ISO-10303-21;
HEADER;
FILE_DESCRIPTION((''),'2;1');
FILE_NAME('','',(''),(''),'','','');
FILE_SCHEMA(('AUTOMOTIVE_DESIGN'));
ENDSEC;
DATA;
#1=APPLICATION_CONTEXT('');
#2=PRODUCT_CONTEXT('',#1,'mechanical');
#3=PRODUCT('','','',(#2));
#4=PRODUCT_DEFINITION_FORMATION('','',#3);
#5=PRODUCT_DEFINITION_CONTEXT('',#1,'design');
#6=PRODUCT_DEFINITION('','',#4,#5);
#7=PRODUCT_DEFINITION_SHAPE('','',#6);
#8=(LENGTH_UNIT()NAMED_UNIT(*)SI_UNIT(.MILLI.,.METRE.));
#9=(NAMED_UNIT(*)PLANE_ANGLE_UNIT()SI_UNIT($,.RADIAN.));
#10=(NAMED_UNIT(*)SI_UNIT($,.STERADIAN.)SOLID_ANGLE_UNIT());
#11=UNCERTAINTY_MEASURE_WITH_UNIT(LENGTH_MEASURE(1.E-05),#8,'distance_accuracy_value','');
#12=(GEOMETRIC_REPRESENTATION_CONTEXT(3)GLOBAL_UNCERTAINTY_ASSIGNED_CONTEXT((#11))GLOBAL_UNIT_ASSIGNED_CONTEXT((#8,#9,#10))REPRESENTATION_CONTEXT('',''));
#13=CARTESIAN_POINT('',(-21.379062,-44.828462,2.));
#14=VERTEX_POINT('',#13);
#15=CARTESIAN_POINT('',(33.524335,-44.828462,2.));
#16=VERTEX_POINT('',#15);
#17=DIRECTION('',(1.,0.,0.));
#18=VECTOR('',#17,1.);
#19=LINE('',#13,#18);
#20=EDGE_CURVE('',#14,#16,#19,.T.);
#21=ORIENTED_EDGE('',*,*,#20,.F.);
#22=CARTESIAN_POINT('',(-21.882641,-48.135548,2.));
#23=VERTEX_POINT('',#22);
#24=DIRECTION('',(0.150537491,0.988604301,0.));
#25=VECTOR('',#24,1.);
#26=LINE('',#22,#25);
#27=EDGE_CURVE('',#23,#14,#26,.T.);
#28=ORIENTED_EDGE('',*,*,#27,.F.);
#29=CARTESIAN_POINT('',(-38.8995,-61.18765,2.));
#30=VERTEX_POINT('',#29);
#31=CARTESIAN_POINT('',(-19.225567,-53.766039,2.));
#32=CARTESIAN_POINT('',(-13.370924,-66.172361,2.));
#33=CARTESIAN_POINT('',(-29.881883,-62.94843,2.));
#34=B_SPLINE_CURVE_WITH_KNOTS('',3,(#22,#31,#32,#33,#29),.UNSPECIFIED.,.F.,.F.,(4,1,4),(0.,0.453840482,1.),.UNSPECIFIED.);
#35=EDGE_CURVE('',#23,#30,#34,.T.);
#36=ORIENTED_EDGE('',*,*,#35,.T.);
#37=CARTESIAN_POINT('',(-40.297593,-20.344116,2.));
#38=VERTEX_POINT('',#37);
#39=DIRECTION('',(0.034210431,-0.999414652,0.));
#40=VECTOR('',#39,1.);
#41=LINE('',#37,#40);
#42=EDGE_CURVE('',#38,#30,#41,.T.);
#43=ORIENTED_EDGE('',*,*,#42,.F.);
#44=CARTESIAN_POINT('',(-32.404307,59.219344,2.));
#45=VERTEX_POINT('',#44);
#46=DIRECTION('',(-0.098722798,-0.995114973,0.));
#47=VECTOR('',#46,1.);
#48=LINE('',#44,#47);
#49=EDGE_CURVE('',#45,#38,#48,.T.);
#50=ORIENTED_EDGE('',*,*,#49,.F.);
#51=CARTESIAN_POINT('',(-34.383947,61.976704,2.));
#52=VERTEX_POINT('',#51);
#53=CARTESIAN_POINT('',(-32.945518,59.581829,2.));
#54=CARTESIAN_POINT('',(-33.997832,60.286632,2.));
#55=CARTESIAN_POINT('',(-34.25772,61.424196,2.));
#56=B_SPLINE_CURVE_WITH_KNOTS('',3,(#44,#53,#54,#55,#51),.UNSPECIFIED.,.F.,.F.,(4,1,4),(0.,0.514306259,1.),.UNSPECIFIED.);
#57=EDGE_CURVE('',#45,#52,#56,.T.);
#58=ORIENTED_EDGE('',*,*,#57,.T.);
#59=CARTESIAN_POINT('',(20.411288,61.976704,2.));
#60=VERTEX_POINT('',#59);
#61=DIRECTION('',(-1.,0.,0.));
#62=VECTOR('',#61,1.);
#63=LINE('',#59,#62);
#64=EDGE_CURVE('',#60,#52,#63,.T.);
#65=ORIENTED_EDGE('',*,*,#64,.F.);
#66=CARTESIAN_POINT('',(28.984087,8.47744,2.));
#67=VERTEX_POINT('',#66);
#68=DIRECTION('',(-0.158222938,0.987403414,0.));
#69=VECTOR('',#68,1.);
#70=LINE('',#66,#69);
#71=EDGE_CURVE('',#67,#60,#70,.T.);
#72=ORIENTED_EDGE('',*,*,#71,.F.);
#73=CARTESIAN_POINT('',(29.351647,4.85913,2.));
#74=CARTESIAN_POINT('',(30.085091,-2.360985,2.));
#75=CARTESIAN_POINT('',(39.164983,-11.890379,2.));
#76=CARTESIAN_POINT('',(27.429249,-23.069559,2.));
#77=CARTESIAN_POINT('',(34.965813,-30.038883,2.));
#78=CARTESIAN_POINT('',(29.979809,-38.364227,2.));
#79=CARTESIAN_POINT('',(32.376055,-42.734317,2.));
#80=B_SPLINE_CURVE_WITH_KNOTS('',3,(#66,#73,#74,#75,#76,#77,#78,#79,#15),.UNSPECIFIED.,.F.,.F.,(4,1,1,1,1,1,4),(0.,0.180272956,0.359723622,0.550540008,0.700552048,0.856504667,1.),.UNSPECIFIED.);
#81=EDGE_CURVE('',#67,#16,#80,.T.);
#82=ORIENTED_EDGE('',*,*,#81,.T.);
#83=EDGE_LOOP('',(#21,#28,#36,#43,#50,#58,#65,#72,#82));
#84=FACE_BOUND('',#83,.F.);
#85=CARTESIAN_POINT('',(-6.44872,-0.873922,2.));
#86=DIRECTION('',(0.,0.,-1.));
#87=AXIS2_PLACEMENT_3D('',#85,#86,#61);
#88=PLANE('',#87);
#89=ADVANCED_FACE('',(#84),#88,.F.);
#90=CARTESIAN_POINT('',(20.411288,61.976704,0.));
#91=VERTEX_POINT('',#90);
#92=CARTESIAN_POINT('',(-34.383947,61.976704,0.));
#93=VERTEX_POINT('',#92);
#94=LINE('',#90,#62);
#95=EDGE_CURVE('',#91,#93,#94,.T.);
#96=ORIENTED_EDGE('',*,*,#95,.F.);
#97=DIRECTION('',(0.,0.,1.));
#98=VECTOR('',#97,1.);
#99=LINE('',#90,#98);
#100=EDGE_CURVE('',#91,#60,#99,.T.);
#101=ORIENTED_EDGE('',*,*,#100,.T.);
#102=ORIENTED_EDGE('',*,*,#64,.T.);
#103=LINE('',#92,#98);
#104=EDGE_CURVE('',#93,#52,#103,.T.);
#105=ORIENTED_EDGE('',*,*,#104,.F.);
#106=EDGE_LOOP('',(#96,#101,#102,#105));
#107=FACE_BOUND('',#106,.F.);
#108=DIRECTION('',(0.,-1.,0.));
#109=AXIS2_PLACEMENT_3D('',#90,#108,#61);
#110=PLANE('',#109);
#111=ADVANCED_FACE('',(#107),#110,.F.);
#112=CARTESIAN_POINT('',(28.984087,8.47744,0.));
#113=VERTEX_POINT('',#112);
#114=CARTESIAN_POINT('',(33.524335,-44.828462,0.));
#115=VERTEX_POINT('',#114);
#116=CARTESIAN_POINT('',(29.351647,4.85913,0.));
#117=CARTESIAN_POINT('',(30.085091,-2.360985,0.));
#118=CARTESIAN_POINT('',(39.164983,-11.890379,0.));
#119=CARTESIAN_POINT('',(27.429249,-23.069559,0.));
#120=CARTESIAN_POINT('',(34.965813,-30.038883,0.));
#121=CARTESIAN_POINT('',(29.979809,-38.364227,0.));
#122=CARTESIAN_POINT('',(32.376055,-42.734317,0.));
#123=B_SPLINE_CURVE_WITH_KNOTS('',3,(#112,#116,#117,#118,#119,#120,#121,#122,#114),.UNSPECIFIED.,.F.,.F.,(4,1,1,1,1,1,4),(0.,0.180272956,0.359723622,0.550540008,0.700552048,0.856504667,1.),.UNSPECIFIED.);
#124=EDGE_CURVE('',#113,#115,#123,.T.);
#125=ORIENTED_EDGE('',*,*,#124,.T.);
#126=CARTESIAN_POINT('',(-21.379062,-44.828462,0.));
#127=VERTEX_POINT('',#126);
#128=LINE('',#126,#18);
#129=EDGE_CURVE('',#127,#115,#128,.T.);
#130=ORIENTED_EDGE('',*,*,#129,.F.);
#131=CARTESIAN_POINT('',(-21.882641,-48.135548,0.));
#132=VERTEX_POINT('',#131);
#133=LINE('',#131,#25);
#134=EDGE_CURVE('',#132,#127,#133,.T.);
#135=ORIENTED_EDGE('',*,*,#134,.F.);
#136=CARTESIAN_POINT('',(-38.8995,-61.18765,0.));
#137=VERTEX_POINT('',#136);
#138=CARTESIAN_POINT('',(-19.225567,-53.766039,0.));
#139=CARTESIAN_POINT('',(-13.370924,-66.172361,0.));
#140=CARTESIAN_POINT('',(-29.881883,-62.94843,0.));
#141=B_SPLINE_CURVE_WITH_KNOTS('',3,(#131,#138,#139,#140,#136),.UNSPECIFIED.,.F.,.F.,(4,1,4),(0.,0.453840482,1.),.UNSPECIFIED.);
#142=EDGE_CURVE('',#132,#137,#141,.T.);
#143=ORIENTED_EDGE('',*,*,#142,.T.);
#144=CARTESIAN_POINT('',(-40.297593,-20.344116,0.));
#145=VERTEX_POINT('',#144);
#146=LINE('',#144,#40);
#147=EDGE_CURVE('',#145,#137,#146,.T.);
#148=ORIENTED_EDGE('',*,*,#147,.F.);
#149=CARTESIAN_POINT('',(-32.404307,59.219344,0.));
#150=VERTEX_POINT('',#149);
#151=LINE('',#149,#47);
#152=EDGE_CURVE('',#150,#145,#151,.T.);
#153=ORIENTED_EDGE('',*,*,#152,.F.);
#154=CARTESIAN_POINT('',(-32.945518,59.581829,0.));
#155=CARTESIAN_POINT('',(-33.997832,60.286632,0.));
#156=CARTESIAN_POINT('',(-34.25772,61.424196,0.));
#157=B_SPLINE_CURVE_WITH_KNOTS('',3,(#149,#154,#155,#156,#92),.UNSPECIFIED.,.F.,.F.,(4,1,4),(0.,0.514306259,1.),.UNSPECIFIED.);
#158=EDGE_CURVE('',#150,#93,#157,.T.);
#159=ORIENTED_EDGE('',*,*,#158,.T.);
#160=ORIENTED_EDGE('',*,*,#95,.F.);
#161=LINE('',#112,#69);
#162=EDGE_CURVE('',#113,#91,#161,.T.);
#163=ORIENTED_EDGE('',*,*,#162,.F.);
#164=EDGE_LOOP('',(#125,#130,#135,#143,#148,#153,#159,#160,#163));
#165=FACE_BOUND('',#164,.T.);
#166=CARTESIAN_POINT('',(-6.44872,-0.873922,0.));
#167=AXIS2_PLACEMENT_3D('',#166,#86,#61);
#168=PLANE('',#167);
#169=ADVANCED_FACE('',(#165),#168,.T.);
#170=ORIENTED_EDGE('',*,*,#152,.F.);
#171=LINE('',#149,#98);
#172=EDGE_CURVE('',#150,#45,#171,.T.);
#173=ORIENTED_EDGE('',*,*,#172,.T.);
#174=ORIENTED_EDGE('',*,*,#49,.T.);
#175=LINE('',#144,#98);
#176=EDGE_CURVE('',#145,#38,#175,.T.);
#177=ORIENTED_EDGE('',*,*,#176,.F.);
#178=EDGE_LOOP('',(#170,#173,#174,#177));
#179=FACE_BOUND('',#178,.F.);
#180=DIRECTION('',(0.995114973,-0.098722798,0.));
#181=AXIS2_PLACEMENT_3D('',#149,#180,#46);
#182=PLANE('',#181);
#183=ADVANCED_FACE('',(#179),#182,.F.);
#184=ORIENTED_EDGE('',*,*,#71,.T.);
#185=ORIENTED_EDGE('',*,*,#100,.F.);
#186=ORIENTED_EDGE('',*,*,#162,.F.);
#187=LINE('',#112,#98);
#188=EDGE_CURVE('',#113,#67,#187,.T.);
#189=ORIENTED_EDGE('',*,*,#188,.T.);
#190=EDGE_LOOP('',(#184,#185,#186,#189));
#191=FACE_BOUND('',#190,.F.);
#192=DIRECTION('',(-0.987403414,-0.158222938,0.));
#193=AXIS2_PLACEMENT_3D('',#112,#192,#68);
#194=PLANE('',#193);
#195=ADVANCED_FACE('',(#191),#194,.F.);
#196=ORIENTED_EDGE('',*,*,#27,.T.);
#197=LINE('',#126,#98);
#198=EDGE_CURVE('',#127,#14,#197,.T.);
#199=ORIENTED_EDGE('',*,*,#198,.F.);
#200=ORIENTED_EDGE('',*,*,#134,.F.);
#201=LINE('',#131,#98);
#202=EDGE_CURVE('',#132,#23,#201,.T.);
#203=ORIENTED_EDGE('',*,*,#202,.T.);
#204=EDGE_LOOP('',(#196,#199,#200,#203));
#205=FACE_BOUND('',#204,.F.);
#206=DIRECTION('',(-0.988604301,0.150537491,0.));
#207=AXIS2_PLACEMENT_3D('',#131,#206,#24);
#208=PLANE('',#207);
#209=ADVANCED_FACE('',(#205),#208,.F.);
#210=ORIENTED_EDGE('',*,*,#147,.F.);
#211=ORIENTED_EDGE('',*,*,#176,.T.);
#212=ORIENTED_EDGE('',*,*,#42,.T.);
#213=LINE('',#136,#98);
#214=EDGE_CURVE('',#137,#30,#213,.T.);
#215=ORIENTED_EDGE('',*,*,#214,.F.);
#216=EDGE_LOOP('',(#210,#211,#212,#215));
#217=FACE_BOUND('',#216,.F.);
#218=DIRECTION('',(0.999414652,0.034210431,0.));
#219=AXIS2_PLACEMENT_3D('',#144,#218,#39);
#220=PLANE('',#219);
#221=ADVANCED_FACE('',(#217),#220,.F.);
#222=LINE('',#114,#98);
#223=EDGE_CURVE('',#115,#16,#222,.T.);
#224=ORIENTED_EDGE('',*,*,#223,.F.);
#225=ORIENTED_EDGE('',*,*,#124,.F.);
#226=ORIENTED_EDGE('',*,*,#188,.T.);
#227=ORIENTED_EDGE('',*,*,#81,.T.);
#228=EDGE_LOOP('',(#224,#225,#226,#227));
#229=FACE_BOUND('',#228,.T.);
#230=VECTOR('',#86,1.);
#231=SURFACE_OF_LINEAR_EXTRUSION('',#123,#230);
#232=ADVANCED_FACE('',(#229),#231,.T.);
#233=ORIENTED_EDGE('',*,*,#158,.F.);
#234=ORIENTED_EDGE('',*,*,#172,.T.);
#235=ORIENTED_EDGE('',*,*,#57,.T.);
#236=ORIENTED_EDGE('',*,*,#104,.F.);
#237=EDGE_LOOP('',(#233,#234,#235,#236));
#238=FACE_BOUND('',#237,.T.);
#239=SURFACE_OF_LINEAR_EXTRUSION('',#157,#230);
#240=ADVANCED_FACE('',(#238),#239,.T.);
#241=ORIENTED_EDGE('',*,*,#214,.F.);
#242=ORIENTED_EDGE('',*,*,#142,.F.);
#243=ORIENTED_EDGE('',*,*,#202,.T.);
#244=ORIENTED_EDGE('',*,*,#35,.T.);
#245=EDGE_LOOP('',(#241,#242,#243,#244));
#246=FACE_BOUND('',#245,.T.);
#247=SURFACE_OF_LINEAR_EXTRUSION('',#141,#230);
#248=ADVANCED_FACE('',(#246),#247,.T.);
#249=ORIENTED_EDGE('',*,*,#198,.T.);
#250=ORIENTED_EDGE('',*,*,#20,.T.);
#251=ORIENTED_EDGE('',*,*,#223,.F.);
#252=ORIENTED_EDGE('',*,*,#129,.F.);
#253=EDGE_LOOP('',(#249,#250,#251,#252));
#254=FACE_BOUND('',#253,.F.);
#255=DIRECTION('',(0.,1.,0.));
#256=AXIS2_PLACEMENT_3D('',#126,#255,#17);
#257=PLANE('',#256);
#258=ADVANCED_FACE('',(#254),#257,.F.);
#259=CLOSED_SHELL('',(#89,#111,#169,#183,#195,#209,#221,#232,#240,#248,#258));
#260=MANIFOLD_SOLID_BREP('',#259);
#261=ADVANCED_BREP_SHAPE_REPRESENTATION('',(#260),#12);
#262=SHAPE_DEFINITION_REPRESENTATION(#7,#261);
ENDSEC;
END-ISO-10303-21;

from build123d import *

# Parameters (mm, degrees)
F1_DEPTH = 2


# Not quite as in the source:
# - a feature of the source that left no trace in its solid (it failed there, or was rolled back) is left out


with BuildPart() as f1:
    # F0 (on Top) → F1 (new body)
    with BuildSketch(Plane.XY):
        with BuildLine():
            add(Edge.make_bspline(
                [(-32.4043067872, 59.2193437133), (-32.9455181975, 59.581828676), (-33.9978316805, 60.2866323929), (-34.2577204684, 61.4241960814), (-34.3839468261, 61.9767036454)],
                knots=[0, 0, 0, 0, 0.5143062586, 1, 1, 1, 1], degree=3))
            Line((-32.4043067872, 59.2193437133), (-40.29759312, -20.3441163994))
            Line((-40.29759312, -20.3441163994), (-38.8994998628, -61.1876496762))
            add(Edge.make_bspline(
                [(-21.8826408634, -48.1355482657), (-19.2255669001, -53.7660393666), (-13.3709239797, -66.1723612522), (-29.8818826365, -62.948430269), (-38.8994998628, -61.1876496762)],
                knots=[0, 0, 0, 0, 0.4538404817, 1, 1, 1, 1], degree=3))
            Line((-21.8826408634, -48.1355482657), (-21.3790618005, -44.8284622711))
            Line((-21.3790618005, -44.8284622711), (33.52433514, -44.8284622711))
            add(Edge.make_bspline(
                [(28.984086711, 8.4774404124), (29.3516469163, 4.8591304728), (30.0850907545, -2.3609850111), (39.1649832019, -11.8903794357), (27.4292491551, -23.0695594567), (34.9658128507, -30.0388830909), (29.9798094231, -38.3642272099), (32.3760551751, -42.734317045), (33.52433514, -44.8284622711)],
                knots=[0, 0, 0, 0, 0.1802729556, 0.3597236224, 0.5505400077, 0.7005520483, 0.8565046665, 1, 1, 1, 1], degree=3))
            Line((28.984086711, 8.4774404124), (20.4112881077, 61.9767036454))
            Line((20.4112881077, 61.9767036454), (-34.3839468261, 61.9767036454))
        make_face()
    extrude(amount=F1_DEPTH)


solid = f1.part
